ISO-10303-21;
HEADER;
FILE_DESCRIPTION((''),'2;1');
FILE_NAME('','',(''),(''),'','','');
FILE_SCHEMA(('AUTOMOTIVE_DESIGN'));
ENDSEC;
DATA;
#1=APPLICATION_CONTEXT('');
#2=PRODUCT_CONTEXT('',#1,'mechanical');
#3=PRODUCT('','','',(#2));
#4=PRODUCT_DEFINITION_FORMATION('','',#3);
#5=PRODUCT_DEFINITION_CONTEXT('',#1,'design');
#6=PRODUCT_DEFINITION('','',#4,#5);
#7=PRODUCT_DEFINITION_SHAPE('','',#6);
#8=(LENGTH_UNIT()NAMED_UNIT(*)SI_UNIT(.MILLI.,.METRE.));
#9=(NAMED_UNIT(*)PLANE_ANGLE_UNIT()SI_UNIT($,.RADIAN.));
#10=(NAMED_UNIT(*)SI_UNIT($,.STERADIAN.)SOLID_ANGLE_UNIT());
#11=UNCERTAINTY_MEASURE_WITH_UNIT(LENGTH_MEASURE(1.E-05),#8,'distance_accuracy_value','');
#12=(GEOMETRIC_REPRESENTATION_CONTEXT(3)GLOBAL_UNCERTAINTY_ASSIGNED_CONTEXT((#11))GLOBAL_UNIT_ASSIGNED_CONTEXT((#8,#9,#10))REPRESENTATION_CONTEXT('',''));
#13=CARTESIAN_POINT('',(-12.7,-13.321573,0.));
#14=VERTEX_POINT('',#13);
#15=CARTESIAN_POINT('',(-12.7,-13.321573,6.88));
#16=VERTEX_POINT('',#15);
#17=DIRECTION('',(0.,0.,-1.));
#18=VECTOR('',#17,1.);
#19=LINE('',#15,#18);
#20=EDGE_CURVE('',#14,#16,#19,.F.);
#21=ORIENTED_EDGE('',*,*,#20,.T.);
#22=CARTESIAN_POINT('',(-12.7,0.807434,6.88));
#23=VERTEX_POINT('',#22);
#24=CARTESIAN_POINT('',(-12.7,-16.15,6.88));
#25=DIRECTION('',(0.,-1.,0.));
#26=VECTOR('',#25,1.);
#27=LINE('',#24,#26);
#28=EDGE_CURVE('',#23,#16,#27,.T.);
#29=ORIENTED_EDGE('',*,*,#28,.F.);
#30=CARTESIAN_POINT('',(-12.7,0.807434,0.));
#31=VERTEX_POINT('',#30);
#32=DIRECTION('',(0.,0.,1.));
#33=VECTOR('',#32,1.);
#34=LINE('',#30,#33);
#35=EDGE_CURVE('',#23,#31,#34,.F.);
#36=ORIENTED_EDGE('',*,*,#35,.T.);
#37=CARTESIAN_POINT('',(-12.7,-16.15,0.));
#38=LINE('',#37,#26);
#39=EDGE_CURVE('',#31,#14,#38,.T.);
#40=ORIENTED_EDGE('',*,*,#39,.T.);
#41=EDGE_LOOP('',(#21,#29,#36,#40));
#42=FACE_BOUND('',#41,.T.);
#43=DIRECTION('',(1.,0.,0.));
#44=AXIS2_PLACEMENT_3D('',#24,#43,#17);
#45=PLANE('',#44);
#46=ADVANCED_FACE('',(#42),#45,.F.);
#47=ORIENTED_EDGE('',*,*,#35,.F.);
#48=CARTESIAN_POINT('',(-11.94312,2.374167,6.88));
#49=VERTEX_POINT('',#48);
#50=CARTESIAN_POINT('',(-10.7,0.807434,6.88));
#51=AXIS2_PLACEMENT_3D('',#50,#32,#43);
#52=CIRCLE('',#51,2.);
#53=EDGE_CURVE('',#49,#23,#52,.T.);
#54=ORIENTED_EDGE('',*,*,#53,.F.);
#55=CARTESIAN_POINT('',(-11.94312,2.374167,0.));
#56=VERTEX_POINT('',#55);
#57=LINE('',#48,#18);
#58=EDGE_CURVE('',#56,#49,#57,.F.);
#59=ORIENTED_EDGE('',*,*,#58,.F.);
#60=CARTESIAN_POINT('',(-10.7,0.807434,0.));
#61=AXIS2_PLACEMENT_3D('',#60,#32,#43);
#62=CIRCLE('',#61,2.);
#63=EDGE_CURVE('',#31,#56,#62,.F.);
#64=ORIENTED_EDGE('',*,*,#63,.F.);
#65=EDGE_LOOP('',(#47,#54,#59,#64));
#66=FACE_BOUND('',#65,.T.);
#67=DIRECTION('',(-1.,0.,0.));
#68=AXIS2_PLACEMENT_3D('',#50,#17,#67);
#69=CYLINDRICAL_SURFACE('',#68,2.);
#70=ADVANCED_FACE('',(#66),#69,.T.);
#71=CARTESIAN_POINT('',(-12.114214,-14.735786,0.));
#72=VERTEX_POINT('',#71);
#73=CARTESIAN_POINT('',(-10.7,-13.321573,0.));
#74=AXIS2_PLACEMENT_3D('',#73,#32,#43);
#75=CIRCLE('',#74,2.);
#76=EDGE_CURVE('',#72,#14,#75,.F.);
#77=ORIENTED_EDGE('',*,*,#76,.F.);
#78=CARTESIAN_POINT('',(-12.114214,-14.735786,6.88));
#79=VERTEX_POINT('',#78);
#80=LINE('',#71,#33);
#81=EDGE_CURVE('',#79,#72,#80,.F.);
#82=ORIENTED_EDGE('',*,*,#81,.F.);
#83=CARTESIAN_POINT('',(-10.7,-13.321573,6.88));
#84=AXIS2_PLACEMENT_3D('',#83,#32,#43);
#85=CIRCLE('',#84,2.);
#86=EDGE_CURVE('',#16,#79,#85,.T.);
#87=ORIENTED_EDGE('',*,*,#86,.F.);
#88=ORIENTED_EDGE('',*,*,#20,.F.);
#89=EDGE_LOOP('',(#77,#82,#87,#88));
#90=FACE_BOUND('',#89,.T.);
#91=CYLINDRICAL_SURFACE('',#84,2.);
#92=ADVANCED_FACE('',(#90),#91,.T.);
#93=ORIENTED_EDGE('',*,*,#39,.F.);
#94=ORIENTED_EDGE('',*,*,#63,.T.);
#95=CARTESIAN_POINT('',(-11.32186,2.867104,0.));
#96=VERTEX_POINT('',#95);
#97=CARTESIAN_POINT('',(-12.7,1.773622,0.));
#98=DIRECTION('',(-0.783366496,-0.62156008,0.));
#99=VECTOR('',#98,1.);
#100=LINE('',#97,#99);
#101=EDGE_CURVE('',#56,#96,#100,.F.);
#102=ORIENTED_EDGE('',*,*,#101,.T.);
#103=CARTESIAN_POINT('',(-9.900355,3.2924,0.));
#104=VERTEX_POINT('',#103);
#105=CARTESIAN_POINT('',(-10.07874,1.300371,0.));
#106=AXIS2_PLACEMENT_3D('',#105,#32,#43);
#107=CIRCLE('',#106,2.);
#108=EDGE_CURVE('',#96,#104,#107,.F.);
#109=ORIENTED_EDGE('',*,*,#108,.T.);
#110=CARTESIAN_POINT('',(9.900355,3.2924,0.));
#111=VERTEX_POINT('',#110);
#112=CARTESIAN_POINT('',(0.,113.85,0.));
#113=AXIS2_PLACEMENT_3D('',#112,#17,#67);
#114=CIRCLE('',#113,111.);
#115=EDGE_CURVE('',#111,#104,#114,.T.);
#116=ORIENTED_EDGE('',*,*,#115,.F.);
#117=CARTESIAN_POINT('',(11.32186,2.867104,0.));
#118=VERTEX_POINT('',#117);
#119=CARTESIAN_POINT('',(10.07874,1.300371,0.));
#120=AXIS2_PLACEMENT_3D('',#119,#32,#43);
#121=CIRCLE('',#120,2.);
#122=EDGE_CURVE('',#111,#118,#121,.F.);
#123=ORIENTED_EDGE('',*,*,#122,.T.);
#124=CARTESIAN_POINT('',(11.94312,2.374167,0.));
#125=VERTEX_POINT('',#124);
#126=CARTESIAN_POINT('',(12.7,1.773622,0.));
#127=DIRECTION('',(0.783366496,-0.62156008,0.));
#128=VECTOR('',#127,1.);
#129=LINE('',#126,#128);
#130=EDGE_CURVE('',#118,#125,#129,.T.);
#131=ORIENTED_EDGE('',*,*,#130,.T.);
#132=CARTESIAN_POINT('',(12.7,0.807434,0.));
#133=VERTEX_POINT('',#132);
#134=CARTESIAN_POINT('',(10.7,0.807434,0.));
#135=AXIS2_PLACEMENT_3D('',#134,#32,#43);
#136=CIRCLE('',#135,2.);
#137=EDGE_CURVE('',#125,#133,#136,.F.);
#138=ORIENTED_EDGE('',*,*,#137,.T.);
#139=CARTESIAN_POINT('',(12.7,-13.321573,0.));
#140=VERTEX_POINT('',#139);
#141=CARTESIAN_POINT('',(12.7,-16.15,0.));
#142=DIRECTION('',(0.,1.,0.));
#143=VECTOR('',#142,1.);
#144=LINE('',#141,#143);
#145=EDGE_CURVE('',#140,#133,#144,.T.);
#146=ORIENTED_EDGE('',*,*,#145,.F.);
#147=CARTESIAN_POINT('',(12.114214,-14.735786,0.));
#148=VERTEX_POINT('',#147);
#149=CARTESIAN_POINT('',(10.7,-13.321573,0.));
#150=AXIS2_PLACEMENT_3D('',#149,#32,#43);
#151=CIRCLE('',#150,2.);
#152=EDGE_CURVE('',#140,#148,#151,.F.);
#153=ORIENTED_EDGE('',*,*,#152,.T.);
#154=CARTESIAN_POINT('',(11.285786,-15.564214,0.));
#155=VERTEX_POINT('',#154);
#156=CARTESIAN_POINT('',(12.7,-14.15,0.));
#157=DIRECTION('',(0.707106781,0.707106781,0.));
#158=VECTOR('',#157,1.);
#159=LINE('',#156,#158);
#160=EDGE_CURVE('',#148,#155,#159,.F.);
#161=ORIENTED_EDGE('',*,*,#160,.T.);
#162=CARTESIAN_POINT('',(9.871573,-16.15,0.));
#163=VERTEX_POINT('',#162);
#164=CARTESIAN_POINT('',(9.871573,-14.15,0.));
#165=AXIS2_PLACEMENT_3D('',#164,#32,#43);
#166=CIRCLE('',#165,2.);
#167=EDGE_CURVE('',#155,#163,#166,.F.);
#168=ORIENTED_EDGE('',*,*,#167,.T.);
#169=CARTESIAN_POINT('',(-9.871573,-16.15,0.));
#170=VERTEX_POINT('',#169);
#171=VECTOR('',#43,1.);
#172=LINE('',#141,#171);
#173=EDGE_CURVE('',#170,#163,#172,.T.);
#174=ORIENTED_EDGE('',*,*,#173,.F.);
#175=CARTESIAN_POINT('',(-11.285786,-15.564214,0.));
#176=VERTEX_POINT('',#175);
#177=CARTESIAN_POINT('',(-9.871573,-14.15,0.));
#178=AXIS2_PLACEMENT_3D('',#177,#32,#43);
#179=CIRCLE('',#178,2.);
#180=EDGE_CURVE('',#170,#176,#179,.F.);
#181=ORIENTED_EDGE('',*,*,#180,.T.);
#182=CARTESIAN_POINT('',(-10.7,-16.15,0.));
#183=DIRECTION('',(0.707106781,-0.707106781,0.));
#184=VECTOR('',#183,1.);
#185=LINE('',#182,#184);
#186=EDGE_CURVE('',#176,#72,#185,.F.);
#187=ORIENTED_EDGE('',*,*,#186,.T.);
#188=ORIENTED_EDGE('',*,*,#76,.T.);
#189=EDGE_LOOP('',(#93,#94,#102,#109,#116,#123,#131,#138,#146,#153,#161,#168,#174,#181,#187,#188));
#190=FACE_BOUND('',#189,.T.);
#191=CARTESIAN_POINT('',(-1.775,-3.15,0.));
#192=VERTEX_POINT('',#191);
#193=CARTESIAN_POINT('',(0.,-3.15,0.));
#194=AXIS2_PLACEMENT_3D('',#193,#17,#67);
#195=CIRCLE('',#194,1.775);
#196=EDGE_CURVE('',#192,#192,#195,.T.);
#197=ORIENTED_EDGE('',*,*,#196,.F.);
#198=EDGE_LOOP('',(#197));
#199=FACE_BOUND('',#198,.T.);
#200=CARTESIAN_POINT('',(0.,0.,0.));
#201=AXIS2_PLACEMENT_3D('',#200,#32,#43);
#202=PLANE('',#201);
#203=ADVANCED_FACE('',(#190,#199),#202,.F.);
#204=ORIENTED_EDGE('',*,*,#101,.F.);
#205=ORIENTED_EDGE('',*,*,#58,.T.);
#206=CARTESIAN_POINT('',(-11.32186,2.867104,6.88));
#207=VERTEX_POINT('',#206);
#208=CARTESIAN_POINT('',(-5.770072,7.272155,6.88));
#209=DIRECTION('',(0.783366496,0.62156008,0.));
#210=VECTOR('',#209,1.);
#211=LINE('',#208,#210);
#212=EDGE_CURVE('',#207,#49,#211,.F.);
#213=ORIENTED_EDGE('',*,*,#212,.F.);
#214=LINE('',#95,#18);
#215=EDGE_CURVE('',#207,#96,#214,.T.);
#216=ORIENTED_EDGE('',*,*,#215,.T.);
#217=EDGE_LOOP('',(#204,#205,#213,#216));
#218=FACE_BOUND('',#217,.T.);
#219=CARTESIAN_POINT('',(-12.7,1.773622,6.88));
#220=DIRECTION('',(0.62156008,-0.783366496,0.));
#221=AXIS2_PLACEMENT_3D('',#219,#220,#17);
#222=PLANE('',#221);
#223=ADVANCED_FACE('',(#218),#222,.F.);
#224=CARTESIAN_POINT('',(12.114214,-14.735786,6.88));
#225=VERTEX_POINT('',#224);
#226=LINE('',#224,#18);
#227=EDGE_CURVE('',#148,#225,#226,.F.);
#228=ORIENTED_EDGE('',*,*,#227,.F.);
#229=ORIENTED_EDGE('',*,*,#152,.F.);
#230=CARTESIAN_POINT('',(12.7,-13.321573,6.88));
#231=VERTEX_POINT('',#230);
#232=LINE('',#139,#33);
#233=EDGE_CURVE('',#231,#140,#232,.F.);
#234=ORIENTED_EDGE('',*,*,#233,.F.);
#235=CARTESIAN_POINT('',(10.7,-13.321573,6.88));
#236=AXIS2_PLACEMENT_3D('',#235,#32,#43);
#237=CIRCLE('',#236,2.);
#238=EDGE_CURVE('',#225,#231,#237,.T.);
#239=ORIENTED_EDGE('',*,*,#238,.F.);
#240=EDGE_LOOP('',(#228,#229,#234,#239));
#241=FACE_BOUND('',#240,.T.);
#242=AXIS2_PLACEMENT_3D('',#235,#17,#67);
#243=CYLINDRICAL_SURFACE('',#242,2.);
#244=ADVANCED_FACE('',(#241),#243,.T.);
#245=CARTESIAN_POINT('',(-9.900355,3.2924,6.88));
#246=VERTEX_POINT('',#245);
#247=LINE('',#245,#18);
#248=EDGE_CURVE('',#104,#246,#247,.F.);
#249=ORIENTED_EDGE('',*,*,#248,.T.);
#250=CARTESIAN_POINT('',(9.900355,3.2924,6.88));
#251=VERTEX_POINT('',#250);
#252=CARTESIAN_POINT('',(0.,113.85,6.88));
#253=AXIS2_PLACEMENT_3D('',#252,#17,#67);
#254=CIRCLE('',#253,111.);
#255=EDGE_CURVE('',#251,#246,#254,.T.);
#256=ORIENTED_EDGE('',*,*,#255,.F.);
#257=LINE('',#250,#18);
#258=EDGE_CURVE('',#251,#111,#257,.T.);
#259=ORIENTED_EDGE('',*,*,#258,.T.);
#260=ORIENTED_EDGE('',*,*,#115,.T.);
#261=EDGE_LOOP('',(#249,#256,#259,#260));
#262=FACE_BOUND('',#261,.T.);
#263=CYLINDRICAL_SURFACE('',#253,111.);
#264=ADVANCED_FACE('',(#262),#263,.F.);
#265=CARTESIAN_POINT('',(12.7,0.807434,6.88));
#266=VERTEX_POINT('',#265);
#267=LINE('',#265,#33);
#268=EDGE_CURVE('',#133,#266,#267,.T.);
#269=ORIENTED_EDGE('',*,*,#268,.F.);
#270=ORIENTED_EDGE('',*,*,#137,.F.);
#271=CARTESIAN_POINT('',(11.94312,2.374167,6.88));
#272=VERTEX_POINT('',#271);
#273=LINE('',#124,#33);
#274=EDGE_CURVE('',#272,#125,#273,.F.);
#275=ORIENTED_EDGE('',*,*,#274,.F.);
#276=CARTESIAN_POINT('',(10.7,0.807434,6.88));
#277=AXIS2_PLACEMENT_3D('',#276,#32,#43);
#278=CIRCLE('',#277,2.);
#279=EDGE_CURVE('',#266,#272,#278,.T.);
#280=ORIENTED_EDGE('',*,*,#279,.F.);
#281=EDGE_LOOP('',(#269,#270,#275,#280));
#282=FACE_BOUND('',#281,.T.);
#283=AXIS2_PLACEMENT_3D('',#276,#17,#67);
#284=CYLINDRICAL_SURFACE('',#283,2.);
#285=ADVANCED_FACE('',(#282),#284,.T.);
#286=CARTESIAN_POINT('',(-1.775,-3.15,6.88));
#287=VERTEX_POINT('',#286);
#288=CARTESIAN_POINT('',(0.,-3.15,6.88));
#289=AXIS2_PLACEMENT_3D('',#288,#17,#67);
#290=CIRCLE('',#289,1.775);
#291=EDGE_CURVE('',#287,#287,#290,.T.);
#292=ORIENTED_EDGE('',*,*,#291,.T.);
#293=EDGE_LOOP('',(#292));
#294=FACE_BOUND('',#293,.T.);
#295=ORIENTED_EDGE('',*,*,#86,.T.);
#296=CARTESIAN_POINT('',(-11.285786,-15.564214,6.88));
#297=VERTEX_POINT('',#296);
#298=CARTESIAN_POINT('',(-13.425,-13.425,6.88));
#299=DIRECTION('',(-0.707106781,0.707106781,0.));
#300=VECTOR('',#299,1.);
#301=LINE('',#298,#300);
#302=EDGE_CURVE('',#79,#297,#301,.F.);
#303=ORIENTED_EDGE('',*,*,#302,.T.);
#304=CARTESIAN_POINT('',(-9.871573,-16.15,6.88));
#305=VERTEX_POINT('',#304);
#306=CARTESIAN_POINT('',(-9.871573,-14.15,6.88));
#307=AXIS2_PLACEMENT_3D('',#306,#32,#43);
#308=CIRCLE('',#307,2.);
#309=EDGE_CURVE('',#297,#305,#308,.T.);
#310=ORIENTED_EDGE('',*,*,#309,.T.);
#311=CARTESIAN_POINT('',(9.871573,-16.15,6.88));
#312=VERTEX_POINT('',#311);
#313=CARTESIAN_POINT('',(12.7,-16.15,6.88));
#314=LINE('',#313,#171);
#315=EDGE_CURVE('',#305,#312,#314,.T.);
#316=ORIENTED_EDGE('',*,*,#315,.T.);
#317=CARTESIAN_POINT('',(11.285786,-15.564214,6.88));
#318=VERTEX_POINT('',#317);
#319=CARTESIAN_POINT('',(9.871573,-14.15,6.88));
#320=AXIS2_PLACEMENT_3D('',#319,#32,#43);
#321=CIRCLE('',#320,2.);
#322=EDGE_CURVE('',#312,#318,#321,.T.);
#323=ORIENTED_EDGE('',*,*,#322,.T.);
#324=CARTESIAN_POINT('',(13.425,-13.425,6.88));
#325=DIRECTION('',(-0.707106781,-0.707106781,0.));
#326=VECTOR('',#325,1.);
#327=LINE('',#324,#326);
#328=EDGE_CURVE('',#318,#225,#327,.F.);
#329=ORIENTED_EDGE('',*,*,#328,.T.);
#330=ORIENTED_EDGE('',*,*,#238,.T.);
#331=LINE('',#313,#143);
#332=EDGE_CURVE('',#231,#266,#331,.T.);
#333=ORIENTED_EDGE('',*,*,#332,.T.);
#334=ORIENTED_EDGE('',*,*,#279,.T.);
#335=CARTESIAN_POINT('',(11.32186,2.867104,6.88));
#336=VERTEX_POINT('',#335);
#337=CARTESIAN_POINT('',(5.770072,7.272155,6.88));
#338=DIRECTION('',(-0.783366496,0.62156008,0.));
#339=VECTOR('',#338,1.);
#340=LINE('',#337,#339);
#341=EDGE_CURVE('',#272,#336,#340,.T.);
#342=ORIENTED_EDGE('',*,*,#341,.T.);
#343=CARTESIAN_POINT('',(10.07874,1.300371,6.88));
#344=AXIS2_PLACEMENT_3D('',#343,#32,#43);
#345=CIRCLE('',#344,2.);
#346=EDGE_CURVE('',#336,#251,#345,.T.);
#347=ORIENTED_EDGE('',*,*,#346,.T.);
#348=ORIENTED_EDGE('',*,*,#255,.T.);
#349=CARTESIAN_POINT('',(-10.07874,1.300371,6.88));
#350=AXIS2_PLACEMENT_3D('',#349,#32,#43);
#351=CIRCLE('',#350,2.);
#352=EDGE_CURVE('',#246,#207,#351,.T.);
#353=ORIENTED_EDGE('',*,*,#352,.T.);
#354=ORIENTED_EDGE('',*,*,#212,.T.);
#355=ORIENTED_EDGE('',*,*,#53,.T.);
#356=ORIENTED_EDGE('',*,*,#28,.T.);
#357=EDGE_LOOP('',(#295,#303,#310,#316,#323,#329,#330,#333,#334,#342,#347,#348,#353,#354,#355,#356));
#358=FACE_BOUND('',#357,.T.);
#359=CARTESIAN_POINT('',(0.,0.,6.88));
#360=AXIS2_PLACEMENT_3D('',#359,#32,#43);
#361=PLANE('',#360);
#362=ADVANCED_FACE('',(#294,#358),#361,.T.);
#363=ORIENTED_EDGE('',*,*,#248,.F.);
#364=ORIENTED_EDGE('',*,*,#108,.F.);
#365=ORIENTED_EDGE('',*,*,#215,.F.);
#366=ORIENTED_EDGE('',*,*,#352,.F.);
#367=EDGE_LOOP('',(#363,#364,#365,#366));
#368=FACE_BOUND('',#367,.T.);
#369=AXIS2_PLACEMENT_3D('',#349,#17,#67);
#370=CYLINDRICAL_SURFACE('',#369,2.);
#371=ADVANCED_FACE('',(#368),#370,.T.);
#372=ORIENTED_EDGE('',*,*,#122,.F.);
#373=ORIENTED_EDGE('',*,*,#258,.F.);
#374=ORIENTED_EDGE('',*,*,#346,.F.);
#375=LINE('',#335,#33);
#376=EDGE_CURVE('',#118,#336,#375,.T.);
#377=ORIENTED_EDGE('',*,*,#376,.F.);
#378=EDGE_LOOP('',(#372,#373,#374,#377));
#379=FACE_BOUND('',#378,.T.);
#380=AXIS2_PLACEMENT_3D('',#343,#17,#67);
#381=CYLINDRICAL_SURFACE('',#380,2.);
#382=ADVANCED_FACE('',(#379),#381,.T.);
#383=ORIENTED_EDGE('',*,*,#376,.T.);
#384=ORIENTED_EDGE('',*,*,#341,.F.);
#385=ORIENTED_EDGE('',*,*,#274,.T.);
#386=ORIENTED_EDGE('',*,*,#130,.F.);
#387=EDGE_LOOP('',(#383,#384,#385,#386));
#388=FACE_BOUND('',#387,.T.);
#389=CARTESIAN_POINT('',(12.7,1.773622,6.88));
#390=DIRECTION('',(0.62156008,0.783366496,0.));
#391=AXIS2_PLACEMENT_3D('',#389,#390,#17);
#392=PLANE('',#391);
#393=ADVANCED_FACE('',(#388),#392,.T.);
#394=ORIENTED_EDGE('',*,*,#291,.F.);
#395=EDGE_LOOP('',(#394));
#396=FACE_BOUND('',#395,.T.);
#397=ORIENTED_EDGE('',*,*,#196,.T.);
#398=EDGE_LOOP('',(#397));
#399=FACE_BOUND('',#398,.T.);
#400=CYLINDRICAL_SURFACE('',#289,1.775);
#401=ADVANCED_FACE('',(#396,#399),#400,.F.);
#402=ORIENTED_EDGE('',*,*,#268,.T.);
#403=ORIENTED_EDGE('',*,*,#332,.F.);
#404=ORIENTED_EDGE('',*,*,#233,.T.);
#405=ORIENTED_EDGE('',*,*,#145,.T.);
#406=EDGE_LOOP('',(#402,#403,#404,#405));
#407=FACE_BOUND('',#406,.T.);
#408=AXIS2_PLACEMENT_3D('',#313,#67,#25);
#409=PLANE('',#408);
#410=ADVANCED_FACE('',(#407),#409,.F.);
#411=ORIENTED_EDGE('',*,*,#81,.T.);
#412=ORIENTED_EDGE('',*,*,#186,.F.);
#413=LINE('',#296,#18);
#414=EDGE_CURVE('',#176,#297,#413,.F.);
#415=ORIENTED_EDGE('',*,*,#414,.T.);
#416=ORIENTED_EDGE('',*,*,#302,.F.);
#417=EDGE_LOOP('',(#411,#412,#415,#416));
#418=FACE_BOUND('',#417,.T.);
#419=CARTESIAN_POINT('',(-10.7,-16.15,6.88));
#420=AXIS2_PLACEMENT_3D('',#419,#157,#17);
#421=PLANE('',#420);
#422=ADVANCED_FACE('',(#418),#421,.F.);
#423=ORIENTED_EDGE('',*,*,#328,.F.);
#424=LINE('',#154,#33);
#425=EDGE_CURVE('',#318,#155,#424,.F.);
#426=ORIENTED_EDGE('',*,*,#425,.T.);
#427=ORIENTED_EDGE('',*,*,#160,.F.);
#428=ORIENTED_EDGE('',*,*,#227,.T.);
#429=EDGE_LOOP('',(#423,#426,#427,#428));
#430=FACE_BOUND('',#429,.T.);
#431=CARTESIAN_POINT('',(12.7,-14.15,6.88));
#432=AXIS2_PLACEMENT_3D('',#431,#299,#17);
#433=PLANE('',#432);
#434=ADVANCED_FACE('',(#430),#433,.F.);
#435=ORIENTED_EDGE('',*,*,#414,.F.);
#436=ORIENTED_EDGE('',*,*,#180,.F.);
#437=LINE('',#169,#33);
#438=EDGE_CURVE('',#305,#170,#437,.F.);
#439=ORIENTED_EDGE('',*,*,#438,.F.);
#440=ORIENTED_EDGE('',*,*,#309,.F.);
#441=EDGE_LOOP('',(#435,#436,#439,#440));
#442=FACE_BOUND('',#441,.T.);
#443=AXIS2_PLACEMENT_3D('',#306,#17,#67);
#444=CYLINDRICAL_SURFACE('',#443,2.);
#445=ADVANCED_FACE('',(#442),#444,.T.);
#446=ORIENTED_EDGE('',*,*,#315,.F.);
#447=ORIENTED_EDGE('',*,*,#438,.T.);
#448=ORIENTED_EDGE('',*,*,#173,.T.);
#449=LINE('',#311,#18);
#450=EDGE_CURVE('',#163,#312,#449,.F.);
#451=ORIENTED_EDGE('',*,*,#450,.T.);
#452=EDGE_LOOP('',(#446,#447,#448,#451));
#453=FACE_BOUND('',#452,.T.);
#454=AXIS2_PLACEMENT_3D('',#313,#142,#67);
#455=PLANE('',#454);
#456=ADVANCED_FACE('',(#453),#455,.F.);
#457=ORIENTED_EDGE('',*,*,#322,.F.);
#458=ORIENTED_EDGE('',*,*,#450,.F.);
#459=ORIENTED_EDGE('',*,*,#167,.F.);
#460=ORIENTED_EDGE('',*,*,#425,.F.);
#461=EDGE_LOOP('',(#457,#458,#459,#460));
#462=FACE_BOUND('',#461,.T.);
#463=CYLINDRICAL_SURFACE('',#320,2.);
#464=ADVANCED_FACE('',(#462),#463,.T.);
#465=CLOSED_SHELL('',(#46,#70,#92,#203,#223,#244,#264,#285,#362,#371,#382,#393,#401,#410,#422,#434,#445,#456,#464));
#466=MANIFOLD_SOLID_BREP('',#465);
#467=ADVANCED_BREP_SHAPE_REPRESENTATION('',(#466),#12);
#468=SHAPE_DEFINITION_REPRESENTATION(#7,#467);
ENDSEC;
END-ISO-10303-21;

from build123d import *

# Parameters (mm, degrees)
SKETCH1_W           = 25.4
SKETCH1_H           = 32.3
BOSS_EXTRUDE1_DEPTH = 6.88
SKETCH3_R           = 111
SKETCH3_R_2         = 1.775
CUT_EXTRUDE1_DEPTH  = 6.88
CHAMFER1_SIZE       = 1.805302587
CHAMFER1_SIZE_2     = 2
FILLET1_R           = 2


with BuildPart() as part:
    # Sketch1 → Boss-Extrude1 (new body)
    with BuildSketch(Plane.XY):
        Rectangle(SKETCH1_W, SKETCH1_H)
    extrude(amount=BOSS_EXTRUDE1_DEPTH)

    # Sketch3 → Cut-Extrude1 (cut)
    with BuildSketch(Plane(origin=(0, 0, 0), x_dir=(-1, 0, 0), z_dir=(0, 0, -1))):
        with Locations((0, 113.850000001)):
            Circle(SKETCH3_R)
        with Locations((0, -3.149999999)):
            Circle(SKETCH3_R_2)
    extrude(amount=-CUT_EXTRUDE1_DEPTH, mode=Mode.SUBTRACT)

    # Chamfer1
    # the kernel refuses this chamfer: 2, 1.805302587 mm, written as the material it takes off along each edge
    with BuildSketch(Plane(origin=(-12.7, 3.578924918, 12.070681021), x_dir=(0, -1, 0), z_dir=(0, 0, -1))) as chamfer1_piece_1:
        with BuildLine():
            Line((CHAMFER1_SIZE, 0), (0.212697329, -2.007197118))
            ThreePointArc((0.212697329, -2.007197118), (0.113915873, -1.031505174), (0, 0))
            Line((0, 0), (CHAMFER1_SIZE, 0))
        make_face()
    extrude(amount=17.261362042, mode=Mode.SUBTRACT)
    with BuildSketch(Plane(origin=(12.7, 3.578924918, 12.070681021), x_dir=(0, -1, 0), z_dir=(0, 0, -1))) as chamfer1_piece_2:
        with BuildLine():
            Line((CHAMFER1_SIZE, 0), (0.212697329, 2.007197118))
            ThreePointArc((0.212697329, 2.007197118), (0.113915873, 1.031505174), (0, 0))
            Line((0, 0), (CHAMFER1_SIZE, 0))
        make_face()
    extrude(amount=17.261362042, mode=Mode.SUBTRACT)
    with BuildSketch(Plane(origin=(12.7, -16.15, -5.143365976), x_dir=(-1, 0, 0), z_dir=(0, 0, 1))) as chamfer1_piece_3:
        Polygon((CHAMFER1_SIZE_2, 0), (0, -CHAMFER1_SIZE_2), (0, 0), align=None)
    extrude(amount=17.166731952, mode=Mode.SUBTRACT)
    with BuildSketch(Plane(origin=(-12.7, -16.15, -5.143365976), x_dir=(1, 0, 0), z_dir=(0, 0, 1))) as chamfer1_piece_4:
        Polygon((CHAMFER1_SIZE_2, 0), (0, CHAMFER1_SIZE_2), (0, 0), align=None)
    extrude(amount=17.166731952, mode=Mode.SUBTRACT)

    # Fillet1
    fillet1_edges = [part.edges().sort_by_distance(p)[0] for p in [
        (12.7, -14.15, 3.44),
        (12.7, 1.773622331, 3.44),
        (-10.692802882, 3.366227588, 3.44),
        (10.692802882, 3.366227588, 3.44),
        (-10.7, -16.15, 3.44),
        (10.7, -16.15, 3.44),
        (-12.7, -14.15, 3.44),
        (-12.7, 1.773622331, 3.44),
    ]]
    fillet(fillet1_edges, radius=FILLET1_R)


solid = part.part
